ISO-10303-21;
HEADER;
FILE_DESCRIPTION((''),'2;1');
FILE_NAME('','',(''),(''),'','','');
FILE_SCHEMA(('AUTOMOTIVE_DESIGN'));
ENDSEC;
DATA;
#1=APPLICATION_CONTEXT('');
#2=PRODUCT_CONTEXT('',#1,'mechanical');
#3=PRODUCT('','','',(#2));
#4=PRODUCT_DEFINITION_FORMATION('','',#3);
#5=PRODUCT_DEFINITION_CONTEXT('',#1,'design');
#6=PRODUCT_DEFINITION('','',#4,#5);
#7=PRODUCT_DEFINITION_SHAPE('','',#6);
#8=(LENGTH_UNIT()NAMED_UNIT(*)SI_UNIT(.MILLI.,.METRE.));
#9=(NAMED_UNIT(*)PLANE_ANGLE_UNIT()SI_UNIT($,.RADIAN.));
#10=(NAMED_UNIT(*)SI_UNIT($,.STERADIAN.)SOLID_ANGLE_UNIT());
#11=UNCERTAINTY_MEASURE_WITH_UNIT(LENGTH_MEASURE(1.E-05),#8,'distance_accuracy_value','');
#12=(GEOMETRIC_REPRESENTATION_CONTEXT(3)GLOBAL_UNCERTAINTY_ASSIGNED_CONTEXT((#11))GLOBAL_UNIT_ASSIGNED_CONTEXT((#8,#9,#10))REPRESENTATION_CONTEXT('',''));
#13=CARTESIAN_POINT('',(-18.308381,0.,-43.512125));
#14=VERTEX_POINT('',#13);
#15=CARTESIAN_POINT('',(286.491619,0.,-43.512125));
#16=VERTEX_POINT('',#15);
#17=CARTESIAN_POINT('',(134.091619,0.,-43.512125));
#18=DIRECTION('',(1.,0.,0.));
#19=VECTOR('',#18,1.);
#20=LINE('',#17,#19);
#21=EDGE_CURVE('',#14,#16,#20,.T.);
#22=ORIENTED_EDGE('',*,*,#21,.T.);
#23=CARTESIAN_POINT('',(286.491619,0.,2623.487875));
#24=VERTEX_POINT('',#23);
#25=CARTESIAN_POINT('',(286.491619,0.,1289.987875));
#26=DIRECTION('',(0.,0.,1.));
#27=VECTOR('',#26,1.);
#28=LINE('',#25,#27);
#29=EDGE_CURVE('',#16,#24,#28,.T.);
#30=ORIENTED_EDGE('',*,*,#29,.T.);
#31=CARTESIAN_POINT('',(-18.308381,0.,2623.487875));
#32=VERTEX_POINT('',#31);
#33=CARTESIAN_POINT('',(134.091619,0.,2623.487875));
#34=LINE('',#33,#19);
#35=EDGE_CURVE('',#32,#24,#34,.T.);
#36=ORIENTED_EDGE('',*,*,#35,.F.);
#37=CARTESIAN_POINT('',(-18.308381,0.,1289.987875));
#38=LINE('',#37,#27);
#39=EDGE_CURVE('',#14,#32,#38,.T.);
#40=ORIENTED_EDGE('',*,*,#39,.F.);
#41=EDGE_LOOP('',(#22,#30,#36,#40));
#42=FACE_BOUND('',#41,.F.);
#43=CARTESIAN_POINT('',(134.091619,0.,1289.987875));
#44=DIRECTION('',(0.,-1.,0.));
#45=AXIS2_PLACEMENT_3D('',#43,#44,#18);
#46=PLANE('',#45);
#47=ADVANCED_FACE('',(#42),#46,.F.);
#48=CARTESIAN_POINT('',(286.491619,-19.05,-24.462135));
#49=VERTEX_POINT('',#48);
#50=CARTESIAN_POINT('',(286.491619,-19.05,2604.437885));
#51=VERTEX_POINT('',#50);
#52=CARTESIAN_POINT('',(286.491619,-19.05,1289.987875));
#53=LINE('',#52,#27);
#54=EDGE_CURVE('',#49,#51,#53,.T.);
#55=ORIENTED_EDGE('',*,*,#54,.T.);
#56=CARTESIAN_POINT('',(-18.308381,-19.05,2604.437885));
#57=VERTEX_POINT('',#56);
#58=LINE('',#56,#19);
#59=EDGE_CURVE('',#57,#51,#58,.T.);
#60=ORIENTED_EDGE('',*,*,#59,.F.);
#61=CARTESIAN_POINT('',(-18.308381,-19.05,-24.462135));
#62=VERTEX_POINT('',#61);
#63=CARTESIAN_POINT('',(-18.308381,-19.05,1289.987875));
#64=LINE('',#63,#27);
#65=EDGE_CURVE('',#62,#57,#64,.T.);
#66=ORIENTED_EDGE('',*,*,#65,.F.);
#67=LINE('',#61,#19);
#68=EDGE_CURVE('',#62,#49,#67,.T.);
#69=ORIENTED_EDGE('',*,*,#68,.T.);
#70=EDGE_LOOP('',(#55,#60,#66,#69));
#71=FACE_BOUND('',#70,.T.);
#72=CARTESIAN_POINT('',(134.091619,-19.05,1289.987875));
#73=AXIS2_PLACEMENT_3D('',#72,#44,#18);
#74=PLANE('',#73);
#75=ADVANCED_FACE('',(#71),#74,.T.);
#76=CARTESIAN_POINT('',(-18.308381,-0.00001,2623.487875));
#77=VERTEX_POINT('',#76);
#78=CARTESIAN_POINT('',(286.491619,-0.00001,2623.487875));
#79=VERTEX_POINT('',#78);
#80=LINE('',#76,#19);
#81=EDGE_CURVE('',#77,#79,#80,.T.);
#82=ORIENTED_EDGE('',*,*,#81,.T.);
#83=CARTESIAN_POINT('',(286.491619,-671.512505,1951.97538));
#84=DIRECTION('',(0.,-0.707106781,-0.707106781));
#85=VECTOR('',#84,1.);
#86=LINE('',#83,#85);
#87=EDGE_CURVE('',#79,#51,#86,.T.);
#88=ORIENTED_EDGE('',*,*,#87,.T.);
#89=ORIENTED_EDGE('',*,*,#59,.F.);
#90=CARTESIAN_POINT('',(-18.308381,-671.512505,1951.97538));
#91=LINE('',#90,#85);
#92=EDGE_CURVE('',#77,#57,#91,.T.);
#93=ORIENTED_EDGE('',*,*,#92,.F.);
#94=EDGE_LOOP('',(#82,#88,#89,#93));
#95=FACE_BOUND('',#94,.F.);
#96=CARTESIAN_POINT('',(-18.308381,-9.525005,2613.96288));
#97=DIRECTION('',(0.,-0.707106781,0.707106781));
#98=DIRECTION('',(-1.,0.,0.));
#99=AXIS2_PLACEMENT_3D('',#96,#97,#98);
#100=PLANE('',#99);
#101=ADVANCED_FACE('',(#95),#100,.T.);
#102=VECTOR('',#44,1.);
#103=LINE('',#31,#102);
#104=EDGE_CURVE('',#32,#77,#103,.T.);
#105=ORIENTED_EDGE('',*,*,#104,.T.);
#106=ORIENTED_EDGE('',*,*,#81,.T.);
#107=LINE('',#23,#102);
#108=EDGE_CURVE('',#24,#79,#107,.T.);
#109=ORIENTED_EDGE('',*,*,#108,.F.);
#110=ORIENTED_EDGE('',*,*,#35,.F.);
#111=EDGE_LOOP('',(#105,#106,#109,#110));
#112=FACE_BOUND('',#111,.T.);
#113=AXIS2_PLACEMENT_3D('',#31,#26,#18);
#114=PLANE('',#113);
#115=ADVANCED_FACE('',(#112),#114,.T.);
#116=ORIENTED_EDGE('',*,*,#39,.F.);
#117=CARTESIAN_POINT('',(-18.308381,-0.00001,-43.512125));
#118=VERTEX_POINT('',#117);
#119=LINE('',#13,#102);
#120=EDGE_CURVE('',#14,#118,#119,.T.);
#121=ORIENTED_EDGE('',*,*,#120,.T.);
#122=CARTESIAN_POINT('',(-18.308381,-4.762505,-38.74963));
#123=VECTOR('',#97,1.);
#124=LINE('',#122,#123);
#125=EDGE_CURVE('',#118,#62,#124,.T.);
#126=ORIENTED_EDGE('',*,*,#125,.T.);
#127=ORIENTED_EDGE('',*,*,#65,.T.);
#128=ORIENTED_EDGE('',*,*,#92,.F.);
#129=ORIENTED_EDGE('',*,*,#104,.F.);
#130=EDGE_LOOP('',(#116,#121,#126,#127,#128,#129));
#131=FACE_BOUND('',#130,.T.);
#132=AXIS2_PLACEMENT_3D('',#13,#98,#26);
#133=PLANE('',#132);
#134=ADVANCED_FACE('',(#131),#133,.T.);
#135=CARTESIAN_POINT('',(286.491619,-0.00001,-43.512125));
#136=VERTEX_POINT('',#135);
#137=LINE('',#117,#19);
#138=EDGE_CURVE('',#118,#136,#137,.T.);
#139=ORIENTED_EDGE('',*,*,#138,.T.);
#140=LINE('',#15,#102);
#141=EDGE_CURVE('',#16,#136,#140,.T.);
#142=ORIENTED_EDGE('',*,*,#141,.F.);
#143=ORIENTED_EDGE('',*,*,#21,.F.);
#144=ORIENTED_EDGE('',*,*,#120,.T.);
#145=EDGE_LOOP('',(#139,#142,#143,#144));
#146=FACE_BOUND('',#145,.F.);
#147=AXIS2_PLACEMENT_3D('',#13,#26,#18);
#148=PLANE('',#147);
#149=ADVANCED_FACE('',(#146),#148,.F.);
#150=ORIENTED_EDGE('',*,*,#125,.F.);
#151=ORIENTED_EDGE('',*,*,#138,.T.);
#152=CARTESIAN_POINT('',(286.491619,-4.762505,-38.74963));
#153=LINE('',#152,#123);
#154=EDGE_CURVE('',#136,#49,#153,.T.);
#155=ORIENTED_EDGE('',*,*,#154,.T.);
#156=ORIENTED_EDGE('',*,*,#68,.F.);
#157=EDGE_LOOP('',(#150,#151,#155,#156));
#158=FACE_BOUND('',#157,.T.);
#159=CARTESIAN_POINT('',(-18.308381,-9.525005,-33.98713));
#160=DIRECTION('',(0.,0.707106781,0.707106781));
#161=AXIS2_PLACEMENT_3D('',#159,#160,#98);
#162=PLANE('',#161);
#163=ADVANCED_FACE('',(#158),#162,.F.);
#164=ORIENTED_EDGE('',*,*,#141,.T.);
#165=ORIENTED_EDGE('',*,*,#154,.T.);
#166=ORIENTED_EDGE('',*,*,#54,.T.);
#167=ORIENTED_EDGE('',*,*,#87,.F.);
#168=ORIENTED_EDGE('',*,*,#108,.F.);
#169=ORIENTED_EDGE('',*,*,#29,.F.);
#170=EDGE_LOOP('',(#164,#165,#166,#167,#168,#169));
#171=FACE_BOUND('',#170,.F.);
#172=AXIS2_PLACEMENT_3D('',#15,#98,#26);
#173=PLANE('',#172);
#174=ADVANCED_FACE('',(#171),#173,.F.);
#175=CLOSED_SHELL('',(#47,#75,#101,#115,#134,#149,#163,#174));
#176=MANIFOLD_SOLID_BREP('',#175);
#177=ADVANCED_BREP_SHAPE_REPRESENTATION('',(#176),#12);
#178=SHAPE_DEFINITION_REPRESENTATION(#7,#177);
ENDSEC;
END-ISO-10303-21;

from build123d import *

# Parameters (mm, degrees)
F0_W     = 304.8
F0_H     = 2667
F1_DEPTH = 19.05
F2_SIZE  = 19.04999


# Not quite as in the source:
# - a fillet or chamfer is up to 0.001 mm smaller than in the source, because OpenCascade refuses the exact size


with BuildPart() as f1:
    # F0 (on Front) → F1 (new body)
    with BuildSketch(Plane.XZ):
        with Locations((134.0916193813, 1289.9878754318)):
            Rectangle(F0_W, F0_H)
    extrude(amount=F1_DEPTH)

    # F2 (size 19.05 in the source; OpenCascade refuses exactly that, so slightly less here)
    f2_edges = [f1.edges().sort_by_distance(p)[0] for p in [
        (134.091619, -19.05, 2623.487875),
        (134.091619, -19.05, -43.512125),
    ]]
    chamfer(f2_edges, length=F2_SIZE)


solid = f1.part
